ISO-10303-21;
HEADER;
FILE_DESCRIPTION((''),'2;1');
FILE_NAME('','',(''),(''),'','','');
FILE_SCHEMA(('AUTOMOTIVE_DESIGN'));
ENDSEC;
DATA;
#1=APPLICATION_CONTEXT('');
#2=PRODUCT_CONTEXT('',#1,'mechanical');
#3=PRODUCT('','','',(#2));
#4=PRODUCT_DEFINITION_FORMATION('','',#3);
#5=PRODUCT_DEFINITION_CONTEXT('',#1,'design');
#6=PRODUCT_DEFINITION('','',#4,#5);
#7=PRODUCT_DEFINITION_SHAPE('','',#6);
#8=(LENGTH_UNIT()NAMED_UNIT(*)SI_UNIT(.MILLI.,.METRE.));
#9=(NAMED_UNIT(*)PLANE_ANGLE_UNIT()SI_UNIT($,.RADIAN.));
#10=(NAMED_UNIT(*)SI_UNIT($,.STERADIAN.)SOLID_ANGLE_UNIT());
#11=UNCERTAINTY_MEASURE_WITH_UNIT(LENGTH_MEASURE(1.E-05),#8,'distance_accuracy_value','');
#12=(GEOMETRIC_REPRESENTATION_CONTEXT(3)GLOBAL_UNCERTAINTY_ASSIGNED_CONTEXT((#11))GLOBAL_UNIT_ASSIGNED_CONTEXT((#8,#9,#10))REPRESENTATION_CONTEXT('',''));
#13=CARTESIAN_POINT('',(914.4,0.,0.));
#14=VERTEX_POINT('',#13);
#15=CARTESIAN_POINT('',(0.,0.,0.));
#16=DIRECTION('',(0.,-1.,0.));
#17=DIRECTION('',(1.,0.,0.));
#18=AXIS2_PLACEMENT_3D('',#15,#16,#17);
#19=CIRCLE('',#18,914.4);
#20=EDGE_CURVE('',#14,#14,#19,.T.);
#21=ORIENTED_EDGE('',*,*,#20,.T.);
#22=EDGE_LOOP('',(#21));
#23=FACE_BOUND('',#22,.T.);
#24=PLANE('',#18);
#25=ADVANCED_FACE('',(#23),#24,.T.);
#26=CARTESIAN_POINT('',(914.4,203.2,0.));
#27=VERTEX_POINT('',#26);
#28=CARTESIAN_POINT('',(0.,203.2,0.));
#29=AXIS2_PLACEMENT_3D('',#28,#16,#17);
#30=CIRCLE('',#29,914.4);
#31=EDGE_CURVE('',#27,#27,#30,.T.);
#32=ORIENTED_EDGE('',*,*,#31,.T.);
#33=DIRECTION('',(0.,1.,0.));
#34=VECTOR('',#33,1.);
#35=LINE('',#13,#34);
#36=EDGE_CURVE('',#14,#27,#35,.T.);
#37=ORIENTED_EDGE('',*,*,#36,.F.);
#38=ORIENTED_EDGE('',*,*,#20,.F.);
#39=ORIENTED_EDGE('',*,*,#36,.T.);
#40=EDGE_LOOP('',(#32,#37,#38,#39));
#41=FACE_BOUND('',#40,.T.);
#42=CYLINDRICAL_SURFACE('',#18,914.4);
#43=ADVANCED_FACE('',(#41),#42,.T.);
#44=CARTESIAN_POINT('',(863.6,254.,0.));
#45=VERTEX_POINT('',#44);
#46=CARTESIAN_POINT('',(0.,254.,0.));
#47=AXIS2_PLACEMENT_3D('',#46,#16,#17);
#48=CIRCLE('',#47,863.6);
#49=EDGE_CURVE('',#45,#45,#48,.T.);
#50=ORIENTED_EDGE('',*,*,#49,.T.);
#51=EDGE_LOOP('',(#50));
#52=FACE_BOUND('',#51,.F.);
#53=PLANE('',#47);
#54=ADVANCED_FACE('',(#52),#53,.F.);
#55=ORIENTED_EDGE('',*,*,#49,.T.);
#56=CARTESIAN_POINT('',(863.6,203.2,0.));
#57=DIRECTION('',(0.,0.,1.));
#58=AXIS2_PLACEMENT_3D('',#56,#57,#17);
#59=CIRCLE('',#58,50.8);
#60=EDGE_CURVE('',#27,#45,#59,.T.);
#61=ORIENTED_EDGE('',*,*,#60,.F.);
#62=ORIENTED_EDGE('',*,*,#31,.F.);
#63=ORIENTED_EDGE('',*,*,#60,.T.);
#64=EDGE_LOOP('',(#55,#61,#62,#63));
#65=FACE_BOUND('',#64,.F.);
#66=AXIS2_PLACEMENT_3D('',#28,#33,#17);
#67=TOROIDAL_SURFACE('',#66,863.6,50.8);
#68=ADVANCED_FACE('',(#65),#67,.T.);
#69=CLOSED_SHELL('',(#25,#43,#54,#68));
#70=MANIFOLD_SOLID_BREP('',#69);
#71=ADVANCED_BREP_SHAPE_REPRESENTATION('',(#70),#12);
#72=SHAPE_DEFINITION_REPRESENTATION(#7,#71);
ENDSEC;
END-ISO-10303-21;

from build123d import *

# Parameters (mm, degrees)
F0_R     = 914.4
F1_DEPTH = 254
F2_R     = 50.8


# Not quite as in the source:
# - the program builds the solid bodies; features that only make, move or delete a surface that nothing else refers to are left out


with BuildPart() as f1:
    # F0 (on Front) → F1 (new body)
    with BuildSketch(Plane.XZ):
        Circle(F0_R)
    extrude(amount=-F1_DEPTH)

    # F2
    f2_edges = [f1.edges().sort_by_distance(p)[0] for p in [
        (-914.4, 254, 0),
    ]]
    fillet(f2_edges, radius=F2_R)


solid = f1.part
